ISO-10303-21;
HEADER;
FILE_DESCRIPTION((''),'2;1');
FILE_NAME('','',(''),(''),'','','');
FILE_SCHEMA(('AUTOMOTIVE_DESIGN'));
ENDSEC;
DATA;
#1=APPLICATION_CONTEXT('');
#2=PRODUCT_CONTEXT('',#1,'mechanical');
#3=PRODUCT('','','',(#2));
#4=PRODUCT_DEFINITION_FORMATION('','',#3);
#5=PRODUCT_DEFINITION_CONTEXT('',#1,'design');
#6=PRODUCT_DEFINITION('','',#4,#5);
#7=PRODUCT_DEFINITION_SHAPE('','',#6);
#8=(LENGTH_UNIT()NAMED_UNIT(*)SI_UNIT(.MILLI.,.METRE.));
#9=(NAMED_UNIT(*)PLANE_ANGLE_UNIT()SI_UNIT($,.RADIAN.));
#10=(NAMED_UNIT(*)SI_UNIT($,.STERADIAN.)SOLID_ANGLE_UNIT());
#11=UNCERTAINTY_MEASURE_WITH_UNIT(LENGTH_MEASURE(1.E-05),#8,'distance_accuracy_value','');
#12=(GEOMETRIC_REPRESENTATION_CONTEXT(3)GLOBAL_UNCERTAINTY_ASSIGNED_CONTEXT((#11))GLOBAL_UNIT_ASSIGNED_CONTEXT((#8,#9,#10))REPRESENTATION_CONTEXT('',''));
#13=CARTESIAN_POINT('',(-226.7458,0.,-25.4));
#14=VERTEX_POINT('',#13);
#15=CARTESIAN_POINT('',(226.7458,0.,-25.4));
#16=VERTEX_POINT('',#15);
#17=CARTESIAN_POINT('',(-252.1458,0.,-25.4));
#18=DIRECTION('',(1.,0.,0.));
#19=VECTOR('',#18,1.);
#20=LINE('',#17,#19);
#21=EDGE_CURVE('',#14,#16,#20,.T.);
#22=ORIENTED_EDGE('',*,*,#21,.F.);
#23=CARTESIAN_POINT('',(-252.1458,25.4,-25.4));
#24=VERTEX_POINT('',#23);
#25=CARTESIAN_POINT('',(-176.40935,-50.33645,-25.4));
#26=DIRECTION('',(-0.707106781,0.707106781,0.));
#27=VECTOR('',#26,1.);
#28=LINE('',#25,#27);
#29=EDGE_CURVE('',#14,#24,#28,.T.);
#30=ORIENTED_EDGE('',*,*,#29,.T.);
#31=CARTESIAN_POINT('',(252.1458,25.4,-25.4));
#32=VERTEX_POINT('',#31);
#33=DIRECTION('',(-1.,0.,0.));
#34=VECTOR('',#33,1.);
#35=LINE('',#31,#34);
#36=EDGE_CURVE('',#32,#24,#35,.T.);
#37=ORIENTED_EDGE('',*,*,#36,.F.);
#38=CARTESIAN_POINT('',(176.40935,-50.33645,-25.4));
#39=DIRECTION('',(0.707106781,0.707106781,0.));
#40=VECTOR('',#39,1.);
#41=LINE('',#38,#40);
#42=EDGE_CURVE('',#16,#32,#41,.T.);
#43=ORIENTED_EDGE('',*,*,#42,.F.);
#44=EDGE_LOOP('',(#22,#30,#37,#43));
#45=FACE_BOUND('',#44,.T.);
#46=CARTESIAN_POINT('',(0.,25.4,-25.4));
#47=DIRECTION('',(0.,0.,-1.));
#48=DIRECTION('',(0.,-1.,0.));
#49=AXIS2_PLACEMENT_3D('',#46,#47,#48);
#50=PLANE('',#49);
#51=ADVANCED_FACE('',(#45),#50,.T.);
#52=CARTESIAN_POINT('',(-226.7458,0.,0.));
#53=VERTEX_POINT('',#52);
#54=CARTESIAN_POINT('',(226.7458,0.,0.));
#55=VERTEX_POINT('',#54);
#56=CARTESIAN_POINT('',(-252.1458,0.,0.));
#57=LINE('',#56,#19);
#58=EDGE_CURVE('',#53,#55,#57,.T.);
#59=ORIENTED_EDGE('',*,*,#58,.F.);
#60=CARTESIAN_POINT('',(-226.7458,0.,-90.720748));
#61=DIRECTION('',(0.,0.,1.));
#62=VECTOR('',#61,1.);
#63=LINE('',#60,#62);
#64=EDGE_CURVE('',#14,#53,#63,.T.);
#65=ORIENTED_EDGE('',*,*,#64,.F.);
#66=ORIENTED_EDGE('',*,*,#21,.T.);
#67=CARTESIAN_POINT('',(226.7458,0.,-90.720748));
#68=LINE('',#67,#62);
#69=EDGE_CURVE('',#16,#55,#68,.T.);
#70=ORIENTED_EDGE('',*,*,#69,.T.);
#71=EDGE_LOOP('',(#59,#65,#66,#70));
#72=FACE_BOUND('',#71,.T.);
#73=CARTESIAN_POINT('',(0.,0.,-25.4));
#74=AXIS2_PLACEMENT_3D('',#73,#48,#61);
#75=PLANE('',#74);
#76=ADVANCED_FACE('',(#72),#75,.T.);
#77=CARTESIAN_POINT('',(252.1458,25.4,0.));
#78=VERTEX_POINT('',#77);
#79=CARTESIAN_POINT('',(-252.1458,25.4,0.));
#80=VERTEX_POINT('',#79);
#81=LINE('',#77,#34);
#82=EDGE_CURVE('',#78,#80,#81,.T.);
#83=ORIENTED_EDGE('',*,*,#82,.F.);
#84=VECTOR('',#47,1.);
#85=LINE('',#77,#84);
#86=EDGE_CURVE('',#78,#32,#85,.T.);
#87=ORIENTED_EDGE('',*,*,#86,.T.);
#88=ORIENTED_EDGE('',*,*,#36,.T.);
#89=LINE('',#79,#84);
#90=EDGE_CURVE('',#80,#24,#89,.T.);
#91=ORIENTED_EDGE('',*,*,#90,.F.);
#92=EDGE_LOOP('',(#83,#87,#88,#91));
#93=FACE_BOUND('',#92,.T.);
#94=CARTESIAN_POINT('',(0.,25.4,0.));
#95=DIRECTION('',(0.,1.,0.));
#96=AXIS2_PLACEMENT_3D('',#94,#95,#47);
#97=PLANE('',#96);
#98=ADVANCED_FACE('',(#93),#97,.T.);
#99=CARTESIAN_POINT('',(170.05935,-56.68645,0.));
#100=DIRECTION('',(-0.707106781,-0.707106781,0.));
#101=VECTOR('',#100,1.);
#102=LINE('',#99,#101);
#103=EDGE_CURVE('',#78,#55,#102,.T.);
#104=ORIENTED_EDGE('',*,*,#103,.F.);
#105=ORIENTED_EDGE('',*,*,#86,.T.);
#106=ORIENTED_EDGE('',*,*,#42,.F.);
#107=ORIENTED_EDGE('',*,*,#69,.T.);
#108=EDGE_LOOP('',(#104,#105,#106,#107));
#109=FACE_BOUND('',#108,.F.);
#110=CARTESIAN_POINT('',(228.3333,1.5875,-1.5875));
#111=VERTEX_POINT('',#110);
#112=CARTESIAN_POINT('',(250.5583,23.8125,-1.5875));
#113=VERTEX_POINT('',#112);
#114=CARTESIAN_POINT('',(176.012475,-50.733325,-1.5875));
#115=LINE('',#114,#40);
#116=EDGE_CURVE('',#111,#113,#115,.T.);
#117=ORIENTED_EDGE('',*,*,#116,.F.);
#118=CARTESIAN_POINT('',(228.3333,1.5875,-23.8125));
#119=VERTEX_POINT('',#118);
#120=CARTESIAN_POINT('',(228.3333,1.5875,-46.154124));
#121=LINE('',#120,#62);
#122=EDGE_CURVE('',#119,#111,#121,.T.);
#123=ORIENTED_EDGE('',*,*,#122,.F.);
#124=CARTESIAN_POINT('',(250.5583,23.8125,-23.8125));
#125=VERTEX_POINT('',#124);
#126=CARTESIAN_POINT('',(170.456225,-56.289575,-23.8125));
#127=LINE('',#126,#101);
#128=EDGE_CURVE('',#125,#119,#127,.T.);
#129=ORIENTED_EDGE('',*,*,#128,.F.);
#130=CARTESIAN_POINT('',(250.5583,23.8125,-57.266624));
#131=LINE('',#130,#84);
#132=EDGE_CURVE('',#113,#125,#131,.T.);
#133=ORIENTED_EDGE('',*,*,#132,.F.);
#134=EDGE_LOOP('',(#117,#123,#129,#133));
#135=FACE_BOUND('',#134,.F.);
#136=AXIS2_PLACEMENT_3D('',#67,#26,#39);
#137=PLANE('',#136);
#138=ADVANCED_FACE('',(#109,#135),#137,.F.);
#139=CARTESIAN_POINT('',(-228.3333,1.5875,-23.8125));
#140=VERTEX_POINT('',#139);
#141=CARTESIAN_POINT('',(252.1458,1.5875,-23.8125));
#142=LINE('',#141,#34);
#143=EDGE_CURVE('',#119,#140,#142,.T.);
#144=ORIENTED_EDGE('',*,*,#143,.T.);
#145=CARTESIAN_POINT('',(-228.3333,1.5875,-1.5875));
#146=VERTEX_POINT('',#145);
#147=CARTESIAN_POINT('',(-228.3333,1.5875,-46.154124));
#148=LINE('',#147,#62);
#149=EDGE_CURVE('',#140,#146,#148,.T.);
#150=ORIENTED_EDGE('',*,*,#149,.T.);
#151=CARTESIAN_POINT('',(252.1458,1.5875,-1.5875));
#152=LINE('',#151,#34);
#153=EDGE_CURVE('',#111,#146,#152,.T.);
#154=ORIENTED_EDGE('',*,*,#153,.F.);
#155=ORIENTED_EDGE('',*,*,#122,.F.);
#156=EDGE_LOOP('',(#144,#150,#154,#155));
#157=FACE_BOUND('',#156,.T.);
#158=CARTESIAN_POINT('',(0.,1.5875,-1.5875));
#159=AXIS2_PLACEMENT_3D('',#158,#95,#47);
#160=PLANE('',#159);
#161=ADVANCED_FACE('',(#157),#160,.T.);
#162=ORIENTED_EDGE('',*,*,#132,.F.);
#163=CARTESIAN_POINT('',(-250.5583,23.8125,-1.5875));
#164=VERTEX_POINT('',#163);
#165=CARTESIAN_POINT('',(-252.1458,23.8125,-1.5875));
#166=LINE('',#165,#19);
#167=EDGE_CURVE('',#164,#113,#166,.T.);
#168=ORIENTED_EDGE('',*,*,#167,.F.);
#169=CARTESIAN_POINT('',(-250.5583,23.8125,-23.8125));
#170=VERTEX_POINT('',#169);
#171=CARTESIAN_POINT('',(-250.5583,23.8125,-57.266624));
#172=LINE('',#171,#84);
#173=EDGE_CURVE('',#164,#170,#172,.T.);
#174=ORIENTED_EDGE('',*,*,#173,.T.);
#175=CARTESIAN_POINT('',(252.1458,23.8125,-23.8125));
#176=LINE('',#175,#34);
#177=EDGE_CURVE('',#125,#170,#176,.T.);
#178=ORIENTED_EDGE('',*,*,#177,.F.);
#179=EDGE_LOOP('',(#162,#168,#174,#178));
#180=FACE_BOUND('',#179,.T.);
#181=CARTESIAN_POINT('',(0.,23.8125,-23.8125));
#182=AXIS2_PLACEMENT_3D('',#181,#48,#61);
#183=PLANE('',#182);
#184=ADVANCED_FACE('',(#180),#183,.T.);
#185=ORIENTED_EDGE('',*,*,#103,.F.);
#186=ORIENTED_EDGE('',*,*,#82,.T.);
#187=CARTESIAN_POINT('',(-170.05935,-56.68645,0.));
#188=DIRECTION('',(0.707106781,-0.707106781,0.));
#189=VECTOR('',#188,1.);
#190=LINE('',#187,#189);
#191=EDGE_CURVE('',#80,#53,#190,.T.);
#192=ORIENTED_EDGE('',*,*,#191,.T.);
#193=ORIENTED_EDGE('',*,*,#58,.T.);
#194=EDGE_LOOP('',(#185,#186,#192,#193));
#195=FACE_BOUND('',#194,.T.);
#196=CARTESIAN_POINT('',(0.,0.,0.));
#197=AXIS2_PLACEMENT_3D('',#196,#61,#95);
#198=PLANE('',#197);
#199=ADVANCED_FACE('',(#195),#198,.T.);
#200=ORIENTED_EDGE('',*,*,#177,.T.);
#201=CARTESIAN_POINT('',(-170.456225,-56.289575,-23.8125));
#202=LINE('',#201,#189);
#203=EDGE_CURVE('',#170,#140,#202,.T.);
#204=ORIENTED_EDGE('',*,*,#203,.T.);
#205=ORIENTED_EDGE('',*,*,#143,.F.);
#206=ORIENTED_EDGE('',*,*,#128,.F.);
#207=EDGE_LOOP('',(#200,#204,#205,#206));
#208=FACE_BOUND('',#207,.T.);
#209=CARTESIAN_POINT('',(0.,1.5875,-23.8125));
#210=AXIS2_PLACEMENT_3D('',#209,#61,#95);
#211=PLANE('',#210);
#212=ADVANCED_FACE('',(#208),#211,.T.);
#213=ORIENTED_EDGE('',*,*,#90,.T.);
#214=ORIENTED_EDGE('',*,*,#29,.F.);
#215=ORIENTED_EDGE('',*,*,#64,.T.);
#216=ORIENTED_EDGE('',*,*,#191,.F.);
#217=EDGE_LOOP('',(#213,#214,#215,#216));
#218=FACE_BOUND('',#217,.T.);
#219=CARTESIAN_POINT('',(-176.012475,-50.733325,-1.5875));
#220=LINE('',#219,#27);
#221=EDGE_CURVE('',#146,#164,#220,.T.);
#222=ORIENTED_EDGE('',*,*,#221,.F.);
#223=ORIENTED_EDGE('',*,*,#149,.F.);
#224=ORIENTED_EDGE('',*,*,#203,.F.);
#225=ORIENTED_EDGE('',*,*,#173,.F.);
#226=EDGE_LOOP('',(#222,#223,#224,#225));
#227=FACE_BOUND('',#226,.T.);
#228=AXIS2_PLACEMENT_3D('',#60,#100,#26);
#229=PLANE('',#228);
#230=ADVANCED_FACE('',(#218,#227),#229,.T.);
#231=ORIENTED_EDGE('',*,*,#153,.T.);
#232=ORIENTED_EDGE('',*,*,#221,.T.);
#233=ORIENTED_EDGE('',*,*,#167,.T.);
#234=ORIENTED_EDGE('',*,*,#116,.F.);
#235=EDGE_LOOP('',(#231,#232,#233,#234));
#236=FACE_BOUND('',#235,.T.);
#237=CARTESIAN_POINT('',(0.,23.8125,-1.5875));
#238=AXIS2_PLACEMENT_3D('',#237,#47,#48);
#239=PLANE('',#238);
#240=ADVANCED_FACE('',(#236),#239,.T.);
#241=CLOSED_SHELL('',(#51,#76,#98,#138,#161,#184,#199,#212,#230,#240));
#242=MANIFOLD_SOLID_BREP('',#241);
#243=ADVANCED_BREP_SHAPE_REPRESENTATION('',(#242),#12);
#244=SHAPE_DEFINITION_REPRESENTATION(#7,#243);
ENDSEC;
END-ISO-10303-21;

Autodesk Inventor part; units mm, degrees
ref_plane "YZ Plane" through (0, 0, 0) normal (1, 0, 0) x (0, 1, 0)
ref_plane "XZ Plane" through (0, 0, 0) normal (0, 1, 0) x (-1, 0, 0)
ref_plane "XY Plane" through (0, 0, 0) normal (0, 0, 1) x (1, 0, 0)
sketch "Sketch1" plane through (0, 0, 0) normal (1, 0, 0) x (0, 1, 0)
  line L0 (0, 0) -> (25.4, 0)
  line L1 (25.4, 0) -> (25.4, -25.4)
  line L2 (25.4, -25.4) -> (0, -25.4)
  line L3 (0, -25.4) -> (0, 0)
  line L4 (23.8125, -1.5875) -> (1.5875, -1.5875)
  line L5 (1.5875, -1.5875) -> (1.5875, -23.8125)
  line L6 (1.5875, -23.8125) -> (23.8125, -23.8125)
  line L7 (23.8125, -23.8125) -> (23.8125, -1.5875)
  dimension "d0" = 25.4
  dimension "d1" = 25.4
  dimension "d2" = 1.5875
extrude "Extrusion1" add sketch "Sketch1" along normal mid plane 504.2916
chamfer "Chamfer1" distance 25.4 angle 45 1 edges at (252.1458, 0, -12.7)
chamfer "Chamfer2" distance 25.4 angle 45 1 edges at (-252.1458, 0, -12.7)
properties part number "SUP_004_TopConnectorBar" material "Aluminum 6061"
